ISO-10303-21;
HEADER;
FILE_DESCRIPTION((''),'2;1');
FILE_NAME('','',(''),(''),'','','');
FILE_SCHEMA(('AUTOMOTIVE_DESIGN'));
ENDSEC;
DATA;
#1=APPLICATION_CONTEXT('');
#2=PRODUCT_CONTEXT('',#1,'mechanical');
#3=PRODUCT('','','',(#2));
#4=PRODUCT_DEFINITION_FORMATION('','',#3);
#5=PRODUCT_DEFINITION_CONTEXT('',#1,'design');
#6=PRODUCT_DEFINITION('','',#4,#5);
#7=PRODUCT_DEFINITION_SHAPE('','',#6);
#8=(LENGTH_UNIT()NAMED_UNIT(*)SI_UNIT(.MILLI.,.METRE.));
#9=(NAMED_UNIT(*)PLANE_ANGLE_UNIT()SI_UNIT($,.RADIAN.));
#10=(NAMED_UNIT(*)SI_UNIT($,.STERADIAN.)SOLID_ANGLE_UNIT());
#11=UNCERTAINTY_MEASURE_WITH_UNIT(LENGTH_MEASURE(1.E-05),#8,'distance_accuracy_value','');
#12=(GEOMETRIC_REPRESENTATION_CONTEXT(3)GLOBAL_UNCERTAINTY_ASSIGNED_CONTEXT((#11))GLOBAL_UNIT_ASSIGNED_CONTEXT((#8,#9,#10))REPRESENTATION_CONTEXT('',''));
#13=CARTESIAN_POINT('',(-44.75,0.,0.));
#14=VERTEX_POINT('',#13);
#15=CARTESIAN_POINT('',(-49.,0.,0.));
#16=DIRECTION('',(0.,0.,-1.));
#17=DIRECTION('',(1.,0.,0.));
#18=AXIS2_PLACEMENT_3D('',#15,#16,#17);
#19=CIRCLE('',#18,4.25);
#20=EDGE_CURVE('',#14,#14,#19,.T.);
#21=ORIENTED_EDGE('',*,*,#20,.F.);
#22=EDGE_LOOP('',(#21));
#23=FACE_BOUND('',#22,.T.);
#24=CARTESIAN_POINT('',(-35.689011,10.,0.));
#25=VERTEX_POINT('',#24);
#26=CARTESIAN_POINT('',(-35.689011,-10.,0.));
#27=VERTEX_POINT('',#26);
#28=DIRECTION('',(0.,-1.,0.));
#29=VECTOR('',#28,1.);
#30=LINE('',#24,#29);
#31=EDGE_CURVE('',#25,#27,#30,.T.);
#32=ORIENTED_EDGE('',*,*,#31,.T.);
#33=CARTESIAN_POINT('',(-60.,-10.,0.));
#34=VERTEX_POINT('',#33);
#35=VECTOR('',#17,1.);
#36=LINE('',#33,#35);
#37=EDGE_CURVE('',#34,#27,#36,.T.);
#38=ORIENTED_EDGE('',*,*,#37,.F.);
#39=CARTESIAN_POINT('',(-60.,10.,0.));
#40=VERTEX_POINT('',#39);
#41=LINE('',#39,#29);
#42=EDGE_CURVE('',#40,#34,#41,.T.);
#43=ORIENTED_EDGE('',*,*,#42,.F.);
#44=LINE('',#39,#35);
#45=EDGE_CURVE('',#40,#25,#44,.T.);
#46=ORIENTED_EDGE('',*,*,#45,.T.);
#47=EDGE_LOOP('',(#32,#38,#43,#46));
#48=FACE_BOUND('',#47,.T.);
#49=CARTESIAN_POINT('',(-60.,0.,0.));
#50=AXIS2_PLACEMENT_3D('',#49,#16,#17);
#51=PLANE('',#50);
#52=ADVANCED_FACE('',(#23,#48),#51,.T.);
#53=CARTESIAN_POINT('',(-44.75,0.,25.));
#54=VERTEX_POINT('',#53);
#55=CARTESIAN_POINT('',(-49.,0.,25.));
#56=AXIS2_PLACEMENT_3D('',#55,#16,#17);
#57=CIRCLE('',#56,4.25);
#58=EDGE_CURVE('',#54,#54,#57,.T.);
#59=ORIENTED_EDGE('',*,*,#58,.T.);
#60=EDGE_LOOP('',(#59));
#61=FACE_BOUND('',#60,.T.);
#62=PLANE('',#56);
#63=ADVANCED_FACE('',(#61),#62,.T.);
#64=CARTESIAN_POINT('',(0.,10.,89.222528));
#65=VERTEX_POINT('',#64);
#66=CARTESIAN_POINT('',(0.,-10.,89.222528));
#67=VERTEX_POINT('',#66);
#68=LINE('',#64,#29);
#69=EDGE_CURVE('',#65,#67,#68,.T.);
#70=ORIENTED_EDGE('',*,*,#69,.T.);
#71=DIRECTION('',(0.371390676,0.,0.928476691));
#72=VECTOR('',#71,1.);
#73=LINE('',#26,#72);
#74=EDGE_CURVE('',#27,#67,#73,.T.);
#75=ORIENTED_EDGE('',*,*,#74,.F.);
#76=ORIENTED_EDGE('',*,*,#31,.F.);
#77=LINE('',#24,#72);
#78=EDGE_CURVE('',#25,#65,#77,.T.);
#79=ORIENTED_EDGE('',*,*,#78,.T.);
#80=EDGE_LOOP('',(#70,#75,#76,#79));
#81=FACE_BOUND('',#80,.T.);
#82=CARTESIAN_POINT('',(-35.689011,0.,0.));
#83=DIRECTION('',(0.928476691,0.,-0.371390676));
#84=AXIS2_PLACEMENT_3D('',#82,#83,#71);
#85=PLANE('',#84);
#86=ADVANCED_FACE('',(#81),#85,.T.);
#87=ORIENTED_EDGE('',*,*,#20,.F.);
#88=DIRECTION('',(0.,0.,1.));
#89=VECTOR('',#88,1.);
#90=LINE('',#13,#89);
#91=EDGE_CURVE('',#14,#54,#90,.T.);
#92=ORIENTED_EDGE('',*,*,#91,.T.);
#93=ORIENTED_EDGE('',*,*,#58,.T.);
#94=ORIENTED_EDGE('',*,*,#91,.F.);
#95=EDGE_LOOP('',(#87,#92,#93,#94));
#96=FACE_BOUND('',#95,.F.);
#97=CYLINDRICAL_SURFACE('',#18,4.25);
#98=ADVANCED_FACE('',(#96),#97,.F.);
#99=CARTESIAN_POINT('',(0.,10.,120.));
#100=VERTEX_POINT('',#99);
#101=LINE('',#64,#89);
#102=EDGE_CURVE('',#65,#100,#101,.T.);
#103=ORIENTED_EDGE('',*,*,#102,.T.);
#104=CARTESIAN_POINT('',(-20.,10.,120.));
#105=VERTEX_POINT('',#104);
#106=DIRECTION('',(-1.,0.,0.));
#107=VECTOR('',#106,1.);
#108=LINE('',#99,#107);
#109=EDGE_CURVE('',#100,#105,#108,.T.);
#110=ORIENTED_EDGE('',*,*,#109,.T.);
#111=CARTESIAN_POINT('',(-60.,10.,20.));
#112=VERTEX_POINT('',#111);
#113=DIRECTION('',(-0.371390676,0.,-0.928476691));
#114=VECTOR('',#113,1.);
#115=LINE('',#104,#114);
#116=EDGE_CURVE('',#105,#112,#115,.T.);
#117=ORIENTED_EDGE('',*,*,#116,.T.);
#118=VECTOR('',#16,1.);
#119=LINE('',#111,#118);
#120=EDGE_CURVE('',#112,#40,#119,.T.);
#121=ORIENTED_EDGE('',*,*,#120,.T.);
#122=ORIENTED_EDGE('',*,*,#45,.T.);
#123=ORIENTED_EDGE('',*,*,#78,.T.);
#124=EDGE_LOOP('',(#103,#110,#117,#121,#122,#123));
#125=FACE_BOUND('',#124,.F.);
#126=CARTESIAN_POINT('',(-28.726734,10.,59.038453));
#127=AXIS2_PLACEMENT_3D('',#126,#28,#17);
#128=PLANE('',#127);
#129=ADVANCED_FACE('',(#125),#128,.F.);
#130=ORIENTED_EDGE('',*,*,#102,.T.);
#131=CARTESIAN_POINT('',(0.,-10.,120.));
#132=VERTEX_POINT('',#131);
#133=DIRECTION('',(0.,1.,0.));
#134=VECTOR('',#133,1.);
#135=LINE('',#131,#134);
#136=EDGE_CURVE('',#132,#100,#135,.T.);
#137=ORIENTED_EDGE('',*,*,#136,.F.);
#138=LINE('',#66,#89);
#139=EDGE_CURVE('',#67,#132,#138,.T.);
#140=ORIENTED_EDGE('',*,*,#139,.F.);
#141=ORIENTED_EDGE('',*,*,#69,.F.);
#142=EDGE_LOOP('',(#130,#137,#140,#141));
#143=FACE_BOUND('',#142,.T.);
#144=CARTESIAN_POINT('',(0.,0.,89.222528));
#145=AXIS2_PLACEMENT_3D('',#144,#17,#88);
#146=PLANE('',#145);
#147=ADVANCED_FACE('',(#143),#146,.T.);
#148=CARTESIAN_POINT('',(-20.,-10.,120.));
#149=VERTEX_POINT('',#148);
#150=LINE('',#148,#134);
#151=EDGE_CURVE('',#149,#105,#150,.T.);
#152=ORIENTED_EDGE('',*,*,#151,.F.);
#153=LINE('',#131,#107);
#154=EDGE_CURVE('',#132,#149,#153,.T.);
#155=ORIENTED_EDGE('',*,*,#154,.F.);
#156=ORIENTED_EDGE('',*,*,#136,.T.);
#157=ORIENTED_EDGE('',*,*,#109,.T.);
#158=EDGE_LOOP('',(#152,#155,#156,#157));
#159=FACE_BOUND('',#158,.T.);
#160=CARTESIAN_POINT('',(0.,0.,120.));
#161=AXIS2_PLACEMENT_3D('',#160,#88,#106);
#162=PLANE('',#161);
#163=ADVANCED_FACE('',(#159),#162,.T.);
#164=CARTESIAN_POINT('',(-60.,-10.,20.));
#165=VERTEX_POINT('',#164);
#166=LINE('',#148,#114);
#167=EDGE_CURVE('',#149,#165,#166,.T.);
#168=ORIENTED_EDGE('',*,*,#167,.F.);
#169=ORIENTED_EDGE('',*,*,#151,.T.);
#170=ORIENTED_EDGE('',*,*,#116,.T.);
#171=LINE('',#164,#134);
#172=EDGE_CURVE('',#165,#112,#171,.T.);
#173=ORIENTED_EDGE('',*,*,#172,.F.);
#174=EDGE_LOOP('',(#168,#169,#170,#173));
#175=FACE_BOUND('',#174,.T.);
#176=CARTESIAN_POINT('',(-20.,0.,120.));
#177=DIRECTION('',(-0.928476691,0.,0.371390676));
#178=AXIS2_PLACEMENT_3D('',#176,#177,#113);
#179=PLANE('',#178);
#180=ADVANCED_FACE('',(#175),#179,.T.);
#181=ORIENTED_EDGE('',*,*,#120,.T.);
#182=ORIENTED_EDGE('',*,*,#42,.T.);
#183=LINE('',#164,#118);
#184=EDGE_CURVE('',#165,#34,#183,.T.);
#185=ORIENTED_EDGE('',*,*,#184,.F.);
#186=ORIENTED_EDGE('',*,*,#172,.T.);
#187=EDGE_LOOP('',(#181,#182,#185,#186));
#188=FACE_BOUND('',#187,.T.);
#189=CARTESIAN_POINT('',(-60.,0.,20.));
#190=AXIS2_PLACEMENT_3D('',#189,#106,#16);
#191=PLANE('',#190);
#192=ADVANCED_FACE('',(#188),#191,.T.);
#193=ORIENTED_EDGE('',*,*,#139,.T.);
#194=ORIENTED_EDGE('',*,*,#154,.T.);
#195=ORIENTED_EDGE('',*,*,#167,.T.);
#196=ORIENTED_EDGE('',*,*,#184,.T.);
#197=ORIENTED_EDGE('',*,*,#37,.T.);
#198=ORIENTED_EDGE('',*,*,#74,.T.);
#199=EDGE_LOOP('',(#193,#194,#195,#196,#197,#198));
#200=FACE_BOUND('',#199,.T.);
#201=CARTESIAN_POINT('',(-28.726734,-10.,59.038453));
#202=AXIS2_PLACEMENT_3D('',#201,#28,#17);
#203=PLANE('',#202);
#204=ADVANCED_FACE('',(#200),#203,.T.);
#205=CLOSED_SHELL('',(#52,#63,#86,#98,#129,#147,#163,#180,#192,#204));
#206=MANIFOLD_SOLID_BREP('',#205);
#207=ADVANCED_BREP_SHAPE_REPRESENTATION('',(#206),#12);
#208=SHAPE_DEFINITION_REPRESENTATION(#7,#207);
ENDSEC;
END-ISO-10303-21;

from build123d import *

# Parameters (mm, degrees)
F1_DEPTH = 10
F2_R     = 4.25
F3_DEPTH = 25


with BuildPart() as f1:
    # F0 (on Front) → F1 (new body, symmetric)
    with BuildSketch(Plane.XZ):
        Polygon((-60, 20), (-60, 0), (-35.6890111572, 0), (0, 89.222527893), (0, 120), (-20, 120), align=None)
    extrude(amount=F1_DEPTH, both=True)

    # F2 (on face) → F3 (cut)
    with BuildSketch(Plane(origin=(0, 0, 0), x_dir=(1, 0, 0), z_dir=(0, 0, -1))):
        with Locations((-49, 0)):
            Circle(F2_R)
    extrude(amount=-F3_DEPTH, mode=Mode.SUBTRACT)


solid = f1.part
